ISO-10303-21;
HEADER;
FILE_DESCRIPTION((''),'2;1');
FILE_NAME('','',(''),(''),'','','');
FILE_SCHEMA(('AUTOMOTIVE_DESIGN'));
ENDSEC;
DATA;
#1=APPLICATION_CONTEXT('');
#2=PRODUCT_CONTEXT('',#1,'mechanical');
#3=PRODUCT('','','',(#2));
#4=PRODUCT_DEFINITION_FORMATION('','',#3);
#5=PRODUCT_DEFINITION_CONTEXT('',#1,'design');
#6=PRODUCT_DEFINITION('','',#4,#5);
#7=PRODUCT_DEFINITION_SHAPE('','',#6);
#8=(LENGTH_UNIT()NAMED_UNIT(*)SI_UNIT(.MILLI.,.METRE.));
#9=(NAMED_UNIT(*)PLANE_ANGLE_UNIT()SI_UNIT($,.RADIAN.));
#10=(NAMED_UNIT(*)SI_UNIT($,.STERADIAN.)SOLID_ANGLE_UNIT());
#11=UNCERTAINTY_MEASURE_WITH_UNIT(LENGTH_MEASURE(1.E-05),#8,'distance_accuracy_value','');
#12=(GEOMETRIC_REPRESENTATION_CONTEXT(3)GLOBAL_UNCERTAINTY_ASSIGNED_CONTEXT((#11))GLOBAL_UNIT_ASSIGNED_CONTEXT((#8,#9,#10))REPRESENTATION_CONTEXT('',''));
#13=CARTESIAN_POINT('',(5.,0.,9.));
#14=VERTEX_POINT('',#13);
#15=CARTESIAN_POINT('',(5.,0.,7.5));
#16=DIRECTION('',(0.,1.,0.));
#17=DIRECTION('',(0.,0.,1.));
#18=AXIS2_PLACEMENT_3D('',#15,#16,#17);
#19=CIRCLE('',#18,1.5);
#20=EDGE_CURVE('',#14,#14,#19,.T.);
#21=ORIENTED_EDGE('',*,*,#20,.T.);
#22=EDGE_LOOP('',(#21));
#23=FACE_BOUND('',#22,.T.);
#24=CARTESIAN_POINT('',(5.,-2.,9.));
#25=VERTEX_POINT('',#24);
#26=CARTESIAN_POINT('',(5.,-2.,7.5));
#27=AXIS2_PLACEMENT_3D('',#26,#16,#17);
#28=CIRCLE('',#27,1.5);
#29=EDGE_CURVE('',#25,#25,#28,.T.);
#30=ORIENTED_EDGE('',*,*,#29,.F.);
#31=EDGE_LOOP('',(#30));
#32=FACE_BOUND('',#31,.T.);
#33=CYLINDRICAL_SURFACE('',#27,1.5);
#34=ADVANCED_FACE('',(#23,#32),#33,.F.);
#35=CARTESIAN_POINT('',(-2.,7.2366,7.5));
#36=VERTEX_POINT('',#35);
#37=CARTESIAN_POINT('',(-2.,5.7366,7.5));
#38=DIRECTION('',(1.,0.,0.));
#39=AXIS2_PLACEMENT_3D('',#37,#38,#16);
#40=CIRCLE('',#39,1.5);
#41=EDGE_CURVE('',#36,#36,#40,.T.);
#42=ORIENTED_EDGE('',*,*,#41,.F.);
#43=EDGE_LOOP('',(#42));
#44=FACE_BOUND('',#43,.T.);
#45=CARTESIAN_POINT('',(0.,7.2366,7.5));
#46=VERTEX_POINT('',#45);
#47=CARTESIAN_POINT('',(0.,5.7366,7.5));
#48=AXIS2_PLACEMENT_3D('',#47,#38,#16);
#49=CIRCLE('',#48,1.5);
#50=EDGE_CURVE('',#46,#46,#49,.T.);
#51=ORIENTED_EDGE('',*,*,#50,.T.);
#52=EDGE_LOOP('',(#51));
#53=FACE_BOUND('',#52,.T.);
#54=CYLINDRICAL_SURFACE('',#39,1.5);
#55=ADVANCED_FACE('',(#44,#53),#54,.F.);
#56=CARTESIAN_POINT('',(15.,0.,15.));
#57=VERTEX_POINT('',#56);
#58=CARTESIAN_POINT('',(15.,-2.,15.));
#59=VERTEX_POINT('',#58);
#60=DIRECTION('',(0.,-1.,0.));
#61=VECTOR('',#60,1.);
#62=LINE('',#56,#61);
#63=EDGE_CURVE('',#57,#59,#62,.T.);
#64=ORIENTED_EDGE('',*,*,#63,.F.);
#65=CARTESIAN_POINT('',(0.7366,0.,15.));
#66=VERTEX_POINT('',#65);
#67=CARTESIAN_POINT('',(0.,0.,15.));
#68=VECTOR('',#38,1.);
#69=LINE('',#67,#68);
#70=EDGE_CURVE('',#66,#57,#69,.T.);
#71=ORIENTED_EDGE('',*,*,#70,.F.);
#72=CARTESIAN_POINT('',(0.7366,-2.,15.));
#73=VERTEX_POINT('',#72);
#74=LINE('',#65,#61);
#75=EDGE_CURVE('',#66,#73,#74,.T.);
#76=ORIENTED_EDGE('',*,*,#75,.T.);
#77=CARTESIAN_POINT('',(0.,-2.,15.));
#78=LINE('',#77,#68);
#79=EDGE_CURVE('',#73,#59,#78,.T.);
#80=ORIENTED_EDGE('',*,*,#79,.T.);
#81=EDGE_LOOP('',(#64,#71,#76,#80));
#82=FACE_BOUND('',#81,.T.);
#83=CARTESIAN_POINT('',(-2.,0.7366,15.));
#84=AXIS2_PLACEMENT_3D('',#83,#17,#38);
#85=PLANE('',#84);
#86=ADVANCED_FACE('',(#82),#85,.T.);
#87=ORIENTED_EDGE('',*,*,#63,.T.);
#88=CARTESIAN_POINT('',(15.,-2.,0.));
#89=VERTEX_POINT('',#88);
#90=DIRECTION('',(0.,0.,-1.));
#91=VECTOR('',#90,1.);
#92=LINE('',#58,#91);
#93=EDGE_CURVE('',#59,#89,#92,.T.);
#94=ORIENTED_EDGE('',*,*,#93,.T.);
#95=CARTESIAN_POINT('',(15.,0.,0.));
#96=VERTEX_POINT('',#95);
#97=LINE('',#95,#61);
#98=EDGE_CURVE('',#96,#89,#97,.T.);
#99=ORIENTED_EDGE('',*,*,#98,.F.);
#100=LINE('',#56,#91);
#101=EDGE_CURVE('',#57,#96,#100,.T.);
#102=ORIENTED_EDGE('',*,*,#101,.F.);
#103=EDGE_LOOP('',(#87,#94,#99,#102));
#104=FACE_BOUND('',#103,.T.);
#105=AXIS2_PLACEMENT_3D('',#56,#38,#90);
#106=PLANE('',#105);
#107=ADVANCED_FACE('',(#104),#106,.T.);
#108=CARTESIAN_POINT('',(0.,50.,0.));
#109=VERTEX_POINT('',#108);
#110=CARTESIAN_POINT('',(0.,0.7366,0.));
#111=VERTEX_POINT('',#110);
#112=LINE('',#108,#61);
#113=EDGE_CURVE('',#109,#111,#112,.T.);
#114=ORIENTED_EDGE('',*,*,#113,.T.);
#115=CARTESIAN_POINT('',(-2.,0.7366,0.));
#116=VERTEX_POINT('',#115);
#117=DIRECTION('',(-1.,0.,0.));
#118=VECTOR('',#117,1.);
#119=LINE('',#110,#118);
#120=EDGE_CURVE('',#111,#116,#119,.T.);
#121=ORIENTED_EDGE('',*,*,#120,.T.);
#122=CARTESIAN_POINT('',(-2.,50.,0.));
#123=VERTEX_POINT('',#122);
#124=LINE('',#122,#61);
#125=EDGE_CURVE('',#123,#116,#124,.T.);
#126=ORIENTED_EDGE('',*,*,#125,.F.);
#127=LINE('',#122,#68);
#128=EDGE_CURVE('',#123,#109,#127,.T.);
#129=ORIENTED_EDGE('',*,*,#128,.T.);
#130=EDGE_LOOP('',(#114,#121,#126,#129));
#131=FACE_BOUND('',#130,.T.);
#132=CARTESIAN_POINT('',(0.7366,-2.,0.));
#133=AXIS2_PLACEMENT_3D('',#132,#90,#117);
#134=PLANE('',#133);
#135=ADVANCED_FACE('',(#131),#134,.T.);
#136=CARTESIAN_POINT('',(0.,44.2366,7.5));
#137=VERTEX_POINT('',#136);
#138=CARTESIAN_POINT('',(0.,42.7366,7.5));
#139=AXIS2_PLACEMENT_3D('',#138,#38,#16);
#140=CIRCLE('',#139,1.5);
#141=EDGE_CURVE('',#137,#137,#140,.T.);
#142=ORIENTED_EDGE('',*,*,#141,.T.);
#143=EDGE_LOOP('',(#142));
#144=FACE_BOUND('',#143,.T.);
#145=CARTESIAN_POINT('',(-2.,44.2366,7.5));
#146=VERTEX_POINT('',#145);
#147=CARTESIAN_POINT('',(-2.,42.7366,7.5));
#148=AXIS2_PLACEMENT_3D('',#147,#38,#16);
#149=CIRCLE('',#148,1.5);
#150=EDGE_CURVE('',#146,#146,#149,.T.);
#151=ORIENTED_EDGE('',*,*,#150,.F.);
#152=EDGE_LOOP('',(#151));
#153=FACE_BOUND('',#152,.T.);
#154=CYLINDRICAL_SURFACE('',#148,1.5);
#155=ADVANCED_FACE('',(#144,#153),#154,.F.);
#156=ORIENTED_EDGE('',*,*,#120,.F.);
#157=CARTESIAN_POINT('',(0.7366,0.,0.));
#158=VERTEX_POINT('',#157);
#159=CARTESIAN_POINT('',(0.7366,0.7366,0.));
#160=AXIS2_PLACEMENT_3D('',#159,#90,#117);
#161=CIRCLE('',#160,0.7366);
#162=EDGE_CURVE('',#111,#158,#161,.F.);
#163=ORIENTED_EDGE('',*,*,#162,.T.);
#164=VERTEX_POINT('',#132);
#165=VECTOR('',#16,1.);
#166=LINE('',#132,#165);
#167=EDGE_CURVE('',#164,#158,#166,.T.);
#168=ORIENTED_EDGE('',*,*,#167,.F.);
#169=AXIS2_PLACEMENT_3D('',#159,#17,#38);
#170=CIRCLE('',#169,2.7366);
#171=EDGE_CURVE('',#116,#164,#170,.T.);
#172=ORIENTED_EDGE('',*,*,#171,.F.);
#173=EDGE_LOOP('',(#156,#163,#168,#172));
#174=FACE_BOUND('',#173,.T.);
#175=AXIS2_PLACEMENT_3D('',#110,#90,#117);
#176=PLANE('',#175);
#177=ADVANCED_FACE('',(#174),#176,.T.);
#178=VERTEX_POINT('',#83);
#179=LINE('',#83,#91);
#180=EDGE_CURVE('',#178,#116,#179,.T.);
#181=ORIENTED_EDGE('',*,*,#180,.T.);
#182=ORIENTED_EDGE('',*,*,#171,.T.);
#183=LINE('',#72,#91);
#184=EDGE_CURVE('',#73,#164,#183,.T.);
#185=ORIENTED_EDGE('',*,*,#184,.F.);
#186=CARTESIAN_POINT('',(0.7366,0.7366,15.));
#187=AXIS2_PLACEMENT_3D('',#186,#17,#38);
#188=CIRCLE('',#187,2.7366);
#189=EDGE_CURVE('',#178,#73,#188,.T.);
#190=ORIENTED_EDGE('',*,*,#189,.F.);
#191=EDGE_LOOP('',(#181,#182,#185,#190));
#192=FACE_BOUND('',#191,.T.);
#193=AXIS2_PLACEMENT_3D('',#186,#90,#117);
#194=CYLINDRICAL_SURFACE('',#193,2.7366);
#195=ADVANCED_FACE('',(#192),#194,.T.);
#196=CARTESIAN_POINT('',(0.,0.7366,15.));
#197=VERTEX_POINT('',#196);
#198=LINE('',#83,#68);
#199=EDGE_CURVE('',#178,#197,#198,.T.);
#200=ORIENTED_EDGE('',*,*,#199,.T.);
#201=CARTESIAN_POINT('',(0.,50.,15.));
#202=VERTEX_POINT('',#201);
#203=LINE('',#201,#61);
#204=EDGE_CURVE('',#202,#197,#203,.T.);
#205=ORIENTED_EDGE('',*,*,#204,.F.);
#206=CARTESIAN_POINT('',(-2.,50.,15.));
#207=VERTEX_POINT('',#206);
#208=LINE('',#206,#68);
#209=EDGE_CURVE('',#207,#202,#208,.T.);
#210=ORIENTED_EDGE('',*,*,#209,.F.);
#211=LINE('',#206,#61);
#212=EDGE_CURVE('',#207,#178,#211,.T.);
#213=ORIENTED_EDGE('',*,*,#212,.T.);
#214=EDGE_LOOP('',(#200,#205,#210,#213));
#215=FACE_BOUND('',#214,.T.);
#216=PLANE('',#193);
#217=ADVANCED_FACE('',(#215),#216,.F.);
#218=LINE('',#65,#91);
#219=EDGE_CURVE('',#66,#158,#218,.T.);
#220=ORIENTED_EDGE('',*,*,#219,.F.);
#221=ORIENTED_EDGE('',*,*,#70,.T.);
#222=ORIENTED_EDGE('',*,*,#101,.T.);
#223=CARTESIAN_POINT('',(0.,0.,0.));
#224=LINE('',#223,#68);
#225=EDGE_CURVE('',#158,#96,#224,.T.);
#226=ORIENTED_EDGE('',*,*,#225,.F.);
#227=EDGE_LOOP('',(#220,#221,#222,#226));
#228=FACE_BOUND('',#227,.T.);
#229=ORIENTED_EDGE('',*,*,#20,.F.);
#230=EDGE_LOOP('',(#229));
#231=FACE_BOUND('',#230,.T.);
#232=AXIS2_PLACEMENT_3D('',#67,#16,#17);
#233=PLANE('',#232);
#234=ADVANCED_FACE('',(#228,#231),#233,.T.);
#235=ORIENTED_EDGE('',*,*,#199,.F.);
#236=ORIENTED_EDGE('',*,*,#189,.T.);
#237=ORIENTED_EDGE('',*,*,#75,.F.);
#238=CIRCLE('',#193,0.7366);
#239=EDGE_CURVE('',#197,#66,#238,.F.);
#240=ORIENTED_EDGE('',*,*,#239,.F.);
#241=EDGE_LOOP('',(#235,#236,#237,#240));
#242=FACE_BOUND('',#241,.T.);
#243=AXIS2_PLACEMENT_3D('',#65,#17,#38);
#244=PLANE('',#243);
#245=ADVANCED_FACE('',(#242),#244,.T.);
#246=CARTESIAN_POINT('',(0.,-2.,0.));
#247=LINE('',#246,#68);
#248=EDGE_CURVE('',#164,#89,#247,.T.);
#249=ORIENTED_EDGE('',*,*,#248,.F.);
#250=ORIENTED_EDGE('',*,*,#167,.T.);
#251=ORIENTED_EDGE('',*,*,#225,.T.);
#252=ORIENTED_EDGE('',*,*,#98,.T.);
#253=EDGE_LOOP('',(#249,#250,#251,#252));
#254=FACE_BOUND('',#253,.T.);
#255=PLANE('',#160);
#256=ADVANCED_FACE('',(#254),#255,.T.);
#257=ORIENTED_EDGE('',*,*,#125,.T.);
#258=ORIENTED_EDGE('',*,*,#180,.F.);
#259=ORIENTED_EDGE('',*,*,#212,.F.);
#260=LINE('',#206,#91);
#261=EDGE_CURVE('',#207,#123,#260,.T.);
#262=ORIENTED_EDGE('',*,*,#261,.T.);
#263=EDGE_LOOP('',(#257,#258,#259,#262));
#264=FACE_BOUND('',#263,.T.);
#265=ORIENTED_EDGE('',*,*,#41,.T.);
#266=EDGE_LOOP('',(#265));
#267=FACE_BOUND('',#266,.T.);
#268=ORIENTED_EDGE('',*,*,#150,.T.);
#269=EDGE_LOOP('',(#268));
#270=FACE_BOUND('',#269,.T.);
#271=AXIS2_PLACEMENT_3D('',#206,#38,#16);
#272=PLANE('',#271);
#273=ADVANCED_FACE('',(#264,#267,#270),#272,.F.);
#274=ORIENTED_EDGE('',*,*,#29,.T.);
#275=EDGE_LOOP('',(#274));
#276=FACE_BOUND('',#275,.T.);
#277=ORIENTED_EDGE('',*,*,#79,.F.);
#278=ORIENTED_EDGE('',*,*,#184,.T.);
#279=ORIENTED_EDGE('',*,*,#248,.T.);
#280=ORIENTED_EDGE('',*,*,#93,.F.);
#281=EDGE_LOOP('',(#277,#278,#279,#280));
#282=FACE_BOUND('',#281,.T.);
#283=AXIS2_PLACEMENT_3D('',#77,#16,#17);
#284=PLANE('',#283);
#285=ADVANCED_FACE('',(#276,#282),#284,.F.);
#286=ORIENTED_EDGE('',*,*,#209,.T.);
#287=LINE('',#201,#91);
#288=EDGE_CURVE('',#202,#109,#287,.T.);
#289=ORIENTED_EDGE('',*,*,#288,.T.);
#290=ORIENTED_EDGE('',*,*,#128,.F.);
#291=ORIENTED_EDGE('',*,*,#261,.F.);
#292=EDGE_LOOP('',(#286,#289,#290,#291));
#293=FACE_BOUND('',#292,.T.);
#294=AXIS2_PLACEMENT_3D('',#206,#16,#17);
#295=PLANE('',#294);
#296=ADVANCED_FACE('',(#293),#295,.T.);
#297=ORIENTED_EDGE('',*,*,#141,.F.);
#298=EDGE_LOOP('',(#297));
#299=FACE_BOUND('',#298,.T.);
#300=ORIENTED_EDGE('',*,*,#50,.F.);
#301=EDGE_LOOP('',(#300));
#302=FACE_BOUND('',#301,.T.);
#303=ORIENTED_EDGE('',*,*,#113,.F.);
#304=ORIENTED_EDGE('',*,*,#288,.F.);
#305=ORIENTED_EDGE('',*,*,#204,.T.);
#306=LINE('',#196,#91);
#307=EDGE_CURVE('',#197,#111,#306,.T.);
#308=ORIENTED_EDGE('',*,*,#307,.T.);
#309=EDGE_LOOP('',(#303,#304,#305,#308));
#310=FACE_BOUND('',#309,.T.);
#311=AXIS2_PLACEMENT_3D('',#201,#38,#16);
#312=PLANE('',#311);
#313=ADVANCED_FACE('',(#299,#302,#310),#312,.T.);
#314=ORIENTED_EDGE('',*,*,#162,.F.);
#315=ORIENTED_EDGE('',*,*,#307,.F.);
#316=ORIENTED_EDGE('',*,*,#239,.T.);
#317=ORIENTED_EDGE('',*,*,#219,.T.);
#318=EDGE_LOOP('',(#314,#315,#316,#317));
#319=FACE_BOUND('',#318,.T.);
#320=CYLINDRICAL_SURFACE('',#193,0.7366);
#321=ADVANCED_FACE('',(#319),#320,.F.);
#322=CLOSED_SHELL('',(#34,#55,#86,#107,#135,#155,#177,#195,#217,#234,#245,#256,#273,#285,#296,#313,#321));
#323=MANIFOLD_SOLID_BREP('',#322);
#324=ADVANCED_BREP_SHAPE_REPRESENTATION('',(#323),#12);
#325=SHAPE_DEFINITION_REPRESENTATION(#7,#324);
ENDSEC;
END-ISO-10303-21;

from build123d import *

# Parameters (mm, degrees)
SM_BASE_FLANGE_1_DEPTH = 15
SKETCH_6_R             = 1.5
CUT_EXTRUDE_1_DEPTH    = 55.313902456
SKETCH_7_R             = 1.5
CUT_EXTRUDE_2_DEPTH    = 55.313902456


# Sheet-metal steps are written as plain solids
with BuildPart() as part:
    # Sketch 1 → 基体-法兰1 (new body)
    with BuildSketch(Plane.XY):
        with BuildLine():
            Line((0, 50), (0, 0.7366))
            ThreePointArc((0, 0.7366), (0.215745145, 0.215745145), (0.7366, 0))
            Line((0.7366, 0), (15, 0))
            Line((15, 0), (15, -2))
            Line((15, -2), (0.7366, -2))
            ThreePointArc((0.7366, -2), (-1.198468417, -1.198468417), (-2, 0.7366))
            Line((-2, 0.7366), (-2, 50))
            Line((-2, 50), (0, 50))
        make_face()
    extrude(amount=SM_BASE_FLANGE_1_DEPTH)

    # 草图6 → 切除-拉伸1 (cut, through all)
    with BuildSketch(Plane(origin=(0, 0, 0), x_dir=(1, 0, 0), z_dir=(0, 1, 0))):
        with Locations(Location((5, -7.5, 0), (0, 0, 270))):
            Circle(SKETCH_6_R)
    extrude(amount=-CUT_EXTRUDE_1_DEPTH, mode=Mode.SUBTRACT)

    # 草图7 → 切除-拉伸2 (cut, through all)
    with BuildSketch(Plane(origin=(0, 0, 0), x_dir=(0, 0, -1), z_dir=(1, 0, 0))):
        with Locations(Location((-7.5, 42.7366, 0), (0, 0, 90))):
            Circle(SKETCH_7_R)
        with Locations(Location((-7.5, 5.7366, 0), (0, 0, 90))):
            Circle(SKETCH_7_R)
    extrude(amount=-CUT_EXTRUDE_2_DEPTH, mode=Mode.SUBTRACT)


solid = part.part
